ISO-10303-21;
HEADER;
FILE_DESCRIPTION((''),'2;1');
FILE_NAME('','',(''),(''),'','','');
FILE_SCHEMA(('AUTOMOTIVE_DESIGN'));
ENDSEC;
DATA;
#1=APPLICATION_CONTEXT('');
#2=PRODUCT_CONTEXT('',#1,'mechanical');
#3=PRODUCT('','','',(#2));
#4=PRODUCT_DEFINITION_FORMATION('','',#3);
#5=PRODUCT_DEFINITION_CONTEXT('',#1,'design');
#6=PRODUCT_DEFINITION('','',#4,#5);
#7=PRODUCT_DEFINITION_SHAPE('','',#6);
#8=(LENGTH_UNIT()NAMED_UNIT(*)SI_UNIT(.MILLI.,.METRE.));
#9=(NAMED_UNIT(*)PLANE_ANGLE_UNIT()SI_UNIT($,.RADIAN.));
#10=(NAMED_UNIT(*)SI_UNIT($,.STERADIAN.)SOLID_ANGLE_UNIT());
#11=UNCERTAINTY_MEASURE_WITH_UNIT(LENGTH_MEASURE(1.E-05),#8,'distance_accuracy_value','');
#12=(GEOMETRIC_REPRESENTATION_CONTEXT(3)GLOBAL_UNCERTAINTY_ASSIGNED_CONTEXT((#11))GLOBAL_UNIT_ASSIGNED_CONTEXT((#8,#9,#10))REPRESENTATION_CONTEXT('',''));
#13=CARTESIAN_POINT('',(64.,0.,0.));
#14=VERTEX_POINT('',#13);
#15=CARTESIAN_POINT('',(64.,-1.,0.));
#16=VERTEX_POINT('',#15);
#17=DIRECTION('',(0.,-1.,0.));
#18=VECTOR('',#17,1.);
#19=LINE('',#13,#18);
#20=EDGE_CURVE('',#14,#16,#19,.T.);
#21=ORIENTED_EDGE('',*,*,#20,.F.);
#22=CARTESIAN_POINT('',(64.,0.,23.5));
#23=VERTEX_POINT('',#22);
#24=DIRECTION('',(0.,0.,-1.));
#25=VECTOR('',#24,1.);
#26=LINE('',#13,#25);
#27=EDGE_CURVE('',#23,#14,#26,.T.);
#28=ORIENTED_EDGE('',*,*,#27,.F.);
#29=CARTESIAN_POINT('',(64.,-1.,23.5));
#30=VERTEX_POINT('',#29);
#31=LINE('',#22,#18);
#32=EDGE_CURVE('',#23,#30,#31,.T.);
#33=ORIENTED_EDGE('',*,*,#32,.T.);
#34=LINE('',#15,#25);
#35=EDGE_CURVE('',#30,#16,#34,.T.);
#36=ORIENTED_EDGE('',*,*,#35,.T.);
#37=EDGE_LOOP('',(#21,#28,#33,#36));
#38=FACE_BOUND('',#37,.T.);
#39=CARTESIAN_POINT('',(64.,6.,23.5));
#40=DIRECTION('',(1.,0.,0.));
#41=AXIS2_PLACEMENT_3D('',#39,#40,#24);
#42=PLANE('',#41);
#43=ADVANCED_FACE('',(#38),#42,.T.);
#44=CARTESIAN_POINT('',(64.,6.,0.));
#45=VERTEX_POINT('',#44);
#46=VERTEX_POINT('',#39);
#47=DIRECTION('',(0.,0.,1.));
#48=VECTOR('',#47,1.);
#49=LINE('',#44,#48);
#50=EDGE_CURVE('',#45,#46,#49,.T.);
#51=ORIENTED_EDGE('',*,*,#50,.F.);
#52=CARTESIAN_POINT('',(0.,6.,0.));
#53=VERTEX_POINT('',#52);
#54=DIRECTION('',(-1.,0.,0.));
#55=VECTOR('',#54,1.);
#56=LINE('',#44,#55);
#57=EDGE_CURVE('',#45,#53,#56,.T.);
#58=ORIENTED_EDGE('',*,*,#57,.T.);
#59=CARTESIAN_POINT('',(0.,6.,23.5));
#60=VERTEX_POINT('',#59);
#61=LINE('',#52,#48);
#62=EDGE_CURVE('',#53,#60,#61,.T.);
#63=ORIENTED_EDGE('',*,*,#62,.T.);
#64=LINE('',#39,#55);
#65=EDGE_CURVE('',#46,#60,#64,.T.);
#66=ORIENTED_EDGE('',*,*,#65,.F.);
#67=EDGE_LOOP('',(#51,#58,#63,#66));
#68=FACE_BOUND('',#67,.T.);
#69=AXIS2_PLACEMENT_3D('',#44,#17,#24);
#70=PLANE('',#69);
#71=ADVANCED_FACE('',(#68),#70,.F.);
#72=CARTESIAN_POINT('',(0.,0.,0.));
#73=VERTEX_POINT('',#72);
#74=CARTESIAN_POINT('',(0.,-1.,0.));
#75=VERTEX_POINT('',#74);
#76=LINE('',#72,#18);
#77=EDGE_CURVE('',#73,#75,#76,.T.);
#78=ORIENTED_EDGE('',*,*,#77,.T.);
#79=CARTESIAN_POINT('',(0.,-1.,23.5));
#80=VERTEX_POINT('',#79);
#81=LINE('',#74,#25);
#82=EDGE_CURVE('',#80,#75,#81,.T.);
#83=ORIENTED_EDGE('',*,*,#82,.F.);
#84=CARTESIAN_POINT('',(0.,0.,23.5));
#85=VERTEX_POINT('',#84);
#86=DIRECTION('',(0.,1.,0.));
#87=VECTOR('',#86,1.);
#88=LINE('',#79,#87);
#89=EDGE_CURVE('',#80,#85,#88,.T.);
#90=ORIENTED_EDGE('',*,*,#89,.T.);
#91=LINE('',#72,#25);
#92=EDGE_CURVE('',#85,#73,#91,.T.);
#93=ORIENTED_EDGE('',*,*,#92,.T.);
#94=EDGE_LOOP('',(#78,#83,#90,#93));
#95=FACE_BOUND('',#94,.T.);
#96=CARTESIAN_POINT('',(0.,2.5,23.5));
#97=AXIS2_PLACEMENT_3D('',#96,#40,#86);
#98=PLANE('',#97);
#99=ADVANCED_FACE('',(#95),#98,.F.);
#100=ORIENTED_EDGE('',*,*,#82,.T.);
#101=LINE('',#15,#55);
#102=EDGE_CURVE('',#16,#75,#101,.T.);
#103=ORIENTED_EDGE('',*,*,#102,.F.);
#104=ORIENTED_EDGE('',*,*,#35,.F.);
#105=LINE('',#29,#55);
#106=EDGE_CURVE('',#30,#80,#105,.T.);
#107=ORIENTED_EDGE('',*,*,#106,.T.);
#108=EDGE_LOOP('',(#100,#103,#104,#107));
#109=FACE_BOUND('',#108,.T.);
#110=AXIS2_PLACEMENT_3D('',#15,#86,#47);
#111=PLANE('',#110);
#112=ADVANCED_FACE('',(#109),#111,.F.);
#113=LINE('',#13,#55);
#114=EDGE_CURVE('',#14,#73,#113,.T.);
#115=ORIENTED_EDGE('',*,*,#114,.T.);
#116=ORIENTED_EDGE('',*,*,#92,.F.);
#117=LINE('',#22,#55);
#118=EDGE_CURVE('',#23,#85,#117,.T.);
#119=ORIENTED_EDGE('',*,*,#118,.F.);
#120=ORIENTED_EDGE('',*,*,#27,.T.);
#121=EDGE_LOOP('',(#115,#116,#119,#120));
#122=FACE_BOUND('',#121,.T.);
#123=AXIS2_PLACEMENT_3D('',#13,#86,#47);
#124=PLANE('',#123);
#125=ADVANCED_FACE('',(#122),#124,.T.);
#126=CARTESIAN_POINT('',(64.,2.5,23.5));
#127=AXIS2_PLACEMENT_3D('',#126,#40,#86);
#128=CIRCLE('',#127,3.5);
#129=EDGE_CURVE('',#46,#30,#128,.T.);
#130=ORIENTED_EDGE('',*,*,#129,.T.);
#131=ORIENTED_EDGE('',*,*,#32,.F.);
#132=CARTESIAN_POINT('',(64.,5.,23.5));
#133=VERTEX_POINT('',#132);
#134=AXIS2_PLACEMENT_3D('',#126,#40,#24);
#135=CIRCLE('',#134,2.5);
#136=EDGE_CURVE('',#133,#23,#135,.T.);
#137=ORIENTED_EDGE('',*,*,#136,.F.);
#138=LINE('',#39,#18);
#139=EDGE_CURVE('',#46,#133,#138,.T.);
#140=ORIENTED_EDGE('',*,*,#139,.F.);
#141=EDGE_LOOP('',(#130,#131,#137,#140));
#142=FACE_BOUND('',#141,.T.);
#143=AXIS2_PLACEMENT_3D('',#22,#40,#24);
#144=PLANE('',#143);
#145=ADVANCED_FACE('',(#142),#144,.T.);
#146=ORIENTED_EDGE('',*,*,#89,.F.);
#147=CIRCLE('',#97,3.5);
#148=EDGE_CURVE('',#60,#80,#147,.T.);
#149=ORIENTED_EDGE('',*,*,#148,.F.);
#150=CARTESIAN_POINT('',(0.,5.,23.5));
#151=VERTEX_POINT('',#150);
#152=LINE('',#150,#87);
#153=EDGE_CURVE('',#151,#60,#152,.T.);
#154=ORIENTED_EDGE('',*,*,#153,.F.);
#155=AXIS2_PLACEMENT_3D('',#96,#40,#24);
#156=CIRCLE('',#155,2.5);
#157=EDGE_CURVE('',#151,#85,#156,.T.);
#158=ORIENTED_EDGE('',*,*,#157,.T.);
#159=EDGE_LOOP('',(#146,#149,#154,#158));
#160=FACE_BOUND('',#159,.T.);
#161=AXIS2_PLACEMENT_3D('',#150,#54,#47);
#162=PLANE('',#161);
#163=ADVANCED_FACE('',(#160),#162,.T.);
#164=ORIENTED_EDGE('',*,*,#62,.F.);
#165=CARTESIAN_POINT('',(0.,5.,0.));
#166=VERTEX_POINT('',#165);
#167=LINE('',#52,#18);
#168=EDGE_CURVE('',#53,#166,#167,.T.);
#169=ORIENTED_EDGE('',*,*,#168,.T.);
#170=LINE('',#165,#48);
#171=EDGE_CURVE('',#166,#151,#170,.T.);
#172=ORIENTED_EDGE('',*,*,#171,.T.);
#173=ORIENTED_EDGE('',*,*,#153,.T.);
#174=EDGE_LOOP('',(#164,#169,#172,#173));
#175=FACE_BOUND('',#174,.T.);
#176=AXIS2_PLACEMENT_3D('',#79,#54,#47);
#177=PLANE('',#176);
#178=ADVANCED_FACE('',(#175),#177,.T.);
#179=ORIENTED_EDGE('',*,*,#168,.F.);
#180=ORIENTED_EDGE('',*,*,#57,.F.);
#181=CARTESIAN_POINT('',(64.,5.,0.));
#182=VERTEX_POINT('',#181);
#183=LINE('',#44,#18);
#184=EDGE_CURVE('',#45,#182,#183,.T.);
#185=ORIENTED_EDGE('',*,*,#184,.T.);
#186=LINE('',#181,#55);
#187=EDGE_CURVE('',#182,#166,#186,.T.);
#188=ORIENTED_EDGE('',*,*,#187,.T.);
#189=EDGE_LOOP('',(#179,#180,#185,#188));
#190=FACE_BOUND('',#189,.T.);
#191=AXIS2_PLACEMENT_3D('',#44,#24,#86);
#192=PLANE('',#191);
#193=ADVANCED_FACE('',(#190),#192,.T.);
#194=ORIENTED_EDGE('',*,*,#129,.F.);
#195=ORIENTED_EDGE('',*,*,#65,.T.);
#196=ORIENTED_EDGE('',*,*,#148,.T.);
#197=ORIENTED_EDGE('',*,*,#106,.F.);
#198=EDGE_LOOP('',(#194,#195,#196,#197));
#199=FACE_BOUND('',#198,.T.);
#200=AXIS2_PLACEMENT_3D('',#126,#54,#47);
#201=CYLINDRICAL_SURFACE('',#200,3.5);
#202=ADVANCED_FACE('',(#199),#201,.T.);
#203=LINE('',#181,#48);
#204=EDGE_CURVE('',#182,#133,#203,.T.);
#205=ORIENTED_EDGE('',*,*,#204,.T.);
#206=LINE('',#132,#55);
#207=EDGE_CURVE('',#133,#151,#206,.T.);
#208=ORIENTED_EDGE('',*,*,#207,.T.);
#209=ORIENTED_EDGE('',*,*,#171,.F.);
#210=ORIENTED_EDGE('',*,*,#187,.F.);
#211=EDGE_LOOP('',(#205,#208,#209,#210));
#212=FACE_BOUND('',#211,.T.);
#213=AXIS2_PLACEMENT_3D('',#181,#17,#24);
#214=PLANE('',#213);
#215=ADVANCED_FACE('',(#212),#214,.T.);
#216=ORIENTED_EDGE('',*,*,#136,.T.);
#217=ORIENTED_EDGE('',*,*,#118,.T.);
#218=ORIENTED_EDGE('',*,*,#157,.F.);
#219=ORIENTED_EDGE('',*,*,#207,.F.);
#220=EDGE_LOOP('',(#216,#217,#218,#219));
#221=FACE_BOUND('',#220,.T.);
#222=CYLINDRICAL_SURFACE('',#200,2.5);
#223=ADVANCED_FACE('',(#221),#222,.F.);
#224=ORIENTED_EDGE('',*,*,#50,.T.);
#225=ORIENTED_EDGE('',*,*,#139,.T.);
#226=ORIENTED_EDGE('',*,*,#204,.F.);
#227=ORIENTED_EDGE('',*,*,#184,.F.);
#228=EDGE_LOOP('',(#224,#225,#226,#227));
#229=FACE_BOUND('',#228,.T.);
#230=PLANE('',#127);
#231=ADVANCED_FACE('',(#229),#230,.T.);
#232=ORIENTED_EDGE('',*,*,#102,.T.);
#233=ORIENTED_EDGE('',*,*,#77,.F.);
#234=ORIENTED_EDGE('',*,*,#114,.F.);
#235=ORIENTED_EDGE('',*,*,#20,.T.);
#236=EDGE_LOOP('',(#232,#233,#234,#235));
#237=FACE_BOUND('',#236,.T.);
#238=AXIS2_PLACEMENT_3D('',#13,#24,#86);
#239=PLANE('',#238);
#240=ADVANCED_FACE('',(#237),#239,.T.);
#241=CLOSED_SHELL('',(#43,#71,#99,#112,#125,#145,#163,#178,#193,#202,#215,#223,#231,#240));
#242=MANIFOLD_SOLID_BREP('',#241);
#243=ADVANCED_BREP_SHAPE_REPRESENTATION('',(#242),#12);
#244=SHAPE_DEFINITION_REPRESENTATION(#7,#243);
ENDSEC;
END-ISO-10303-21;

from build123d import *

# Parameters (mm, degrees)
TABAN_FLAN_1_DEPTH = 64


# Sheet-metal steps are written as plain solids
with BuildPart() as part:
    # Çizim1 → Taban-Flanş1 (new body)
    with BuildSketch(Plane.YZ):
        with BuildLine():
            Line((0, 0), (0, 23.5))
            ThreePointArc((0, 23.5), (2.5, 26), (5, 23.5))
            Line((5, 23.5), (5, 0))
            Line((5, 0), (6, 0))
            Line((6, 0), (6, 23.5))
            ThreePointArc((6, 23.5), (2.5, 27), (-1, 23.5))
            Line((-1, 23.5), (-1, 0))
            Line((-1, 0), (0, 0))
        make_face()
    extrude(amount=TABAN_FLAN_1_DEPTH)


solid = part.part
